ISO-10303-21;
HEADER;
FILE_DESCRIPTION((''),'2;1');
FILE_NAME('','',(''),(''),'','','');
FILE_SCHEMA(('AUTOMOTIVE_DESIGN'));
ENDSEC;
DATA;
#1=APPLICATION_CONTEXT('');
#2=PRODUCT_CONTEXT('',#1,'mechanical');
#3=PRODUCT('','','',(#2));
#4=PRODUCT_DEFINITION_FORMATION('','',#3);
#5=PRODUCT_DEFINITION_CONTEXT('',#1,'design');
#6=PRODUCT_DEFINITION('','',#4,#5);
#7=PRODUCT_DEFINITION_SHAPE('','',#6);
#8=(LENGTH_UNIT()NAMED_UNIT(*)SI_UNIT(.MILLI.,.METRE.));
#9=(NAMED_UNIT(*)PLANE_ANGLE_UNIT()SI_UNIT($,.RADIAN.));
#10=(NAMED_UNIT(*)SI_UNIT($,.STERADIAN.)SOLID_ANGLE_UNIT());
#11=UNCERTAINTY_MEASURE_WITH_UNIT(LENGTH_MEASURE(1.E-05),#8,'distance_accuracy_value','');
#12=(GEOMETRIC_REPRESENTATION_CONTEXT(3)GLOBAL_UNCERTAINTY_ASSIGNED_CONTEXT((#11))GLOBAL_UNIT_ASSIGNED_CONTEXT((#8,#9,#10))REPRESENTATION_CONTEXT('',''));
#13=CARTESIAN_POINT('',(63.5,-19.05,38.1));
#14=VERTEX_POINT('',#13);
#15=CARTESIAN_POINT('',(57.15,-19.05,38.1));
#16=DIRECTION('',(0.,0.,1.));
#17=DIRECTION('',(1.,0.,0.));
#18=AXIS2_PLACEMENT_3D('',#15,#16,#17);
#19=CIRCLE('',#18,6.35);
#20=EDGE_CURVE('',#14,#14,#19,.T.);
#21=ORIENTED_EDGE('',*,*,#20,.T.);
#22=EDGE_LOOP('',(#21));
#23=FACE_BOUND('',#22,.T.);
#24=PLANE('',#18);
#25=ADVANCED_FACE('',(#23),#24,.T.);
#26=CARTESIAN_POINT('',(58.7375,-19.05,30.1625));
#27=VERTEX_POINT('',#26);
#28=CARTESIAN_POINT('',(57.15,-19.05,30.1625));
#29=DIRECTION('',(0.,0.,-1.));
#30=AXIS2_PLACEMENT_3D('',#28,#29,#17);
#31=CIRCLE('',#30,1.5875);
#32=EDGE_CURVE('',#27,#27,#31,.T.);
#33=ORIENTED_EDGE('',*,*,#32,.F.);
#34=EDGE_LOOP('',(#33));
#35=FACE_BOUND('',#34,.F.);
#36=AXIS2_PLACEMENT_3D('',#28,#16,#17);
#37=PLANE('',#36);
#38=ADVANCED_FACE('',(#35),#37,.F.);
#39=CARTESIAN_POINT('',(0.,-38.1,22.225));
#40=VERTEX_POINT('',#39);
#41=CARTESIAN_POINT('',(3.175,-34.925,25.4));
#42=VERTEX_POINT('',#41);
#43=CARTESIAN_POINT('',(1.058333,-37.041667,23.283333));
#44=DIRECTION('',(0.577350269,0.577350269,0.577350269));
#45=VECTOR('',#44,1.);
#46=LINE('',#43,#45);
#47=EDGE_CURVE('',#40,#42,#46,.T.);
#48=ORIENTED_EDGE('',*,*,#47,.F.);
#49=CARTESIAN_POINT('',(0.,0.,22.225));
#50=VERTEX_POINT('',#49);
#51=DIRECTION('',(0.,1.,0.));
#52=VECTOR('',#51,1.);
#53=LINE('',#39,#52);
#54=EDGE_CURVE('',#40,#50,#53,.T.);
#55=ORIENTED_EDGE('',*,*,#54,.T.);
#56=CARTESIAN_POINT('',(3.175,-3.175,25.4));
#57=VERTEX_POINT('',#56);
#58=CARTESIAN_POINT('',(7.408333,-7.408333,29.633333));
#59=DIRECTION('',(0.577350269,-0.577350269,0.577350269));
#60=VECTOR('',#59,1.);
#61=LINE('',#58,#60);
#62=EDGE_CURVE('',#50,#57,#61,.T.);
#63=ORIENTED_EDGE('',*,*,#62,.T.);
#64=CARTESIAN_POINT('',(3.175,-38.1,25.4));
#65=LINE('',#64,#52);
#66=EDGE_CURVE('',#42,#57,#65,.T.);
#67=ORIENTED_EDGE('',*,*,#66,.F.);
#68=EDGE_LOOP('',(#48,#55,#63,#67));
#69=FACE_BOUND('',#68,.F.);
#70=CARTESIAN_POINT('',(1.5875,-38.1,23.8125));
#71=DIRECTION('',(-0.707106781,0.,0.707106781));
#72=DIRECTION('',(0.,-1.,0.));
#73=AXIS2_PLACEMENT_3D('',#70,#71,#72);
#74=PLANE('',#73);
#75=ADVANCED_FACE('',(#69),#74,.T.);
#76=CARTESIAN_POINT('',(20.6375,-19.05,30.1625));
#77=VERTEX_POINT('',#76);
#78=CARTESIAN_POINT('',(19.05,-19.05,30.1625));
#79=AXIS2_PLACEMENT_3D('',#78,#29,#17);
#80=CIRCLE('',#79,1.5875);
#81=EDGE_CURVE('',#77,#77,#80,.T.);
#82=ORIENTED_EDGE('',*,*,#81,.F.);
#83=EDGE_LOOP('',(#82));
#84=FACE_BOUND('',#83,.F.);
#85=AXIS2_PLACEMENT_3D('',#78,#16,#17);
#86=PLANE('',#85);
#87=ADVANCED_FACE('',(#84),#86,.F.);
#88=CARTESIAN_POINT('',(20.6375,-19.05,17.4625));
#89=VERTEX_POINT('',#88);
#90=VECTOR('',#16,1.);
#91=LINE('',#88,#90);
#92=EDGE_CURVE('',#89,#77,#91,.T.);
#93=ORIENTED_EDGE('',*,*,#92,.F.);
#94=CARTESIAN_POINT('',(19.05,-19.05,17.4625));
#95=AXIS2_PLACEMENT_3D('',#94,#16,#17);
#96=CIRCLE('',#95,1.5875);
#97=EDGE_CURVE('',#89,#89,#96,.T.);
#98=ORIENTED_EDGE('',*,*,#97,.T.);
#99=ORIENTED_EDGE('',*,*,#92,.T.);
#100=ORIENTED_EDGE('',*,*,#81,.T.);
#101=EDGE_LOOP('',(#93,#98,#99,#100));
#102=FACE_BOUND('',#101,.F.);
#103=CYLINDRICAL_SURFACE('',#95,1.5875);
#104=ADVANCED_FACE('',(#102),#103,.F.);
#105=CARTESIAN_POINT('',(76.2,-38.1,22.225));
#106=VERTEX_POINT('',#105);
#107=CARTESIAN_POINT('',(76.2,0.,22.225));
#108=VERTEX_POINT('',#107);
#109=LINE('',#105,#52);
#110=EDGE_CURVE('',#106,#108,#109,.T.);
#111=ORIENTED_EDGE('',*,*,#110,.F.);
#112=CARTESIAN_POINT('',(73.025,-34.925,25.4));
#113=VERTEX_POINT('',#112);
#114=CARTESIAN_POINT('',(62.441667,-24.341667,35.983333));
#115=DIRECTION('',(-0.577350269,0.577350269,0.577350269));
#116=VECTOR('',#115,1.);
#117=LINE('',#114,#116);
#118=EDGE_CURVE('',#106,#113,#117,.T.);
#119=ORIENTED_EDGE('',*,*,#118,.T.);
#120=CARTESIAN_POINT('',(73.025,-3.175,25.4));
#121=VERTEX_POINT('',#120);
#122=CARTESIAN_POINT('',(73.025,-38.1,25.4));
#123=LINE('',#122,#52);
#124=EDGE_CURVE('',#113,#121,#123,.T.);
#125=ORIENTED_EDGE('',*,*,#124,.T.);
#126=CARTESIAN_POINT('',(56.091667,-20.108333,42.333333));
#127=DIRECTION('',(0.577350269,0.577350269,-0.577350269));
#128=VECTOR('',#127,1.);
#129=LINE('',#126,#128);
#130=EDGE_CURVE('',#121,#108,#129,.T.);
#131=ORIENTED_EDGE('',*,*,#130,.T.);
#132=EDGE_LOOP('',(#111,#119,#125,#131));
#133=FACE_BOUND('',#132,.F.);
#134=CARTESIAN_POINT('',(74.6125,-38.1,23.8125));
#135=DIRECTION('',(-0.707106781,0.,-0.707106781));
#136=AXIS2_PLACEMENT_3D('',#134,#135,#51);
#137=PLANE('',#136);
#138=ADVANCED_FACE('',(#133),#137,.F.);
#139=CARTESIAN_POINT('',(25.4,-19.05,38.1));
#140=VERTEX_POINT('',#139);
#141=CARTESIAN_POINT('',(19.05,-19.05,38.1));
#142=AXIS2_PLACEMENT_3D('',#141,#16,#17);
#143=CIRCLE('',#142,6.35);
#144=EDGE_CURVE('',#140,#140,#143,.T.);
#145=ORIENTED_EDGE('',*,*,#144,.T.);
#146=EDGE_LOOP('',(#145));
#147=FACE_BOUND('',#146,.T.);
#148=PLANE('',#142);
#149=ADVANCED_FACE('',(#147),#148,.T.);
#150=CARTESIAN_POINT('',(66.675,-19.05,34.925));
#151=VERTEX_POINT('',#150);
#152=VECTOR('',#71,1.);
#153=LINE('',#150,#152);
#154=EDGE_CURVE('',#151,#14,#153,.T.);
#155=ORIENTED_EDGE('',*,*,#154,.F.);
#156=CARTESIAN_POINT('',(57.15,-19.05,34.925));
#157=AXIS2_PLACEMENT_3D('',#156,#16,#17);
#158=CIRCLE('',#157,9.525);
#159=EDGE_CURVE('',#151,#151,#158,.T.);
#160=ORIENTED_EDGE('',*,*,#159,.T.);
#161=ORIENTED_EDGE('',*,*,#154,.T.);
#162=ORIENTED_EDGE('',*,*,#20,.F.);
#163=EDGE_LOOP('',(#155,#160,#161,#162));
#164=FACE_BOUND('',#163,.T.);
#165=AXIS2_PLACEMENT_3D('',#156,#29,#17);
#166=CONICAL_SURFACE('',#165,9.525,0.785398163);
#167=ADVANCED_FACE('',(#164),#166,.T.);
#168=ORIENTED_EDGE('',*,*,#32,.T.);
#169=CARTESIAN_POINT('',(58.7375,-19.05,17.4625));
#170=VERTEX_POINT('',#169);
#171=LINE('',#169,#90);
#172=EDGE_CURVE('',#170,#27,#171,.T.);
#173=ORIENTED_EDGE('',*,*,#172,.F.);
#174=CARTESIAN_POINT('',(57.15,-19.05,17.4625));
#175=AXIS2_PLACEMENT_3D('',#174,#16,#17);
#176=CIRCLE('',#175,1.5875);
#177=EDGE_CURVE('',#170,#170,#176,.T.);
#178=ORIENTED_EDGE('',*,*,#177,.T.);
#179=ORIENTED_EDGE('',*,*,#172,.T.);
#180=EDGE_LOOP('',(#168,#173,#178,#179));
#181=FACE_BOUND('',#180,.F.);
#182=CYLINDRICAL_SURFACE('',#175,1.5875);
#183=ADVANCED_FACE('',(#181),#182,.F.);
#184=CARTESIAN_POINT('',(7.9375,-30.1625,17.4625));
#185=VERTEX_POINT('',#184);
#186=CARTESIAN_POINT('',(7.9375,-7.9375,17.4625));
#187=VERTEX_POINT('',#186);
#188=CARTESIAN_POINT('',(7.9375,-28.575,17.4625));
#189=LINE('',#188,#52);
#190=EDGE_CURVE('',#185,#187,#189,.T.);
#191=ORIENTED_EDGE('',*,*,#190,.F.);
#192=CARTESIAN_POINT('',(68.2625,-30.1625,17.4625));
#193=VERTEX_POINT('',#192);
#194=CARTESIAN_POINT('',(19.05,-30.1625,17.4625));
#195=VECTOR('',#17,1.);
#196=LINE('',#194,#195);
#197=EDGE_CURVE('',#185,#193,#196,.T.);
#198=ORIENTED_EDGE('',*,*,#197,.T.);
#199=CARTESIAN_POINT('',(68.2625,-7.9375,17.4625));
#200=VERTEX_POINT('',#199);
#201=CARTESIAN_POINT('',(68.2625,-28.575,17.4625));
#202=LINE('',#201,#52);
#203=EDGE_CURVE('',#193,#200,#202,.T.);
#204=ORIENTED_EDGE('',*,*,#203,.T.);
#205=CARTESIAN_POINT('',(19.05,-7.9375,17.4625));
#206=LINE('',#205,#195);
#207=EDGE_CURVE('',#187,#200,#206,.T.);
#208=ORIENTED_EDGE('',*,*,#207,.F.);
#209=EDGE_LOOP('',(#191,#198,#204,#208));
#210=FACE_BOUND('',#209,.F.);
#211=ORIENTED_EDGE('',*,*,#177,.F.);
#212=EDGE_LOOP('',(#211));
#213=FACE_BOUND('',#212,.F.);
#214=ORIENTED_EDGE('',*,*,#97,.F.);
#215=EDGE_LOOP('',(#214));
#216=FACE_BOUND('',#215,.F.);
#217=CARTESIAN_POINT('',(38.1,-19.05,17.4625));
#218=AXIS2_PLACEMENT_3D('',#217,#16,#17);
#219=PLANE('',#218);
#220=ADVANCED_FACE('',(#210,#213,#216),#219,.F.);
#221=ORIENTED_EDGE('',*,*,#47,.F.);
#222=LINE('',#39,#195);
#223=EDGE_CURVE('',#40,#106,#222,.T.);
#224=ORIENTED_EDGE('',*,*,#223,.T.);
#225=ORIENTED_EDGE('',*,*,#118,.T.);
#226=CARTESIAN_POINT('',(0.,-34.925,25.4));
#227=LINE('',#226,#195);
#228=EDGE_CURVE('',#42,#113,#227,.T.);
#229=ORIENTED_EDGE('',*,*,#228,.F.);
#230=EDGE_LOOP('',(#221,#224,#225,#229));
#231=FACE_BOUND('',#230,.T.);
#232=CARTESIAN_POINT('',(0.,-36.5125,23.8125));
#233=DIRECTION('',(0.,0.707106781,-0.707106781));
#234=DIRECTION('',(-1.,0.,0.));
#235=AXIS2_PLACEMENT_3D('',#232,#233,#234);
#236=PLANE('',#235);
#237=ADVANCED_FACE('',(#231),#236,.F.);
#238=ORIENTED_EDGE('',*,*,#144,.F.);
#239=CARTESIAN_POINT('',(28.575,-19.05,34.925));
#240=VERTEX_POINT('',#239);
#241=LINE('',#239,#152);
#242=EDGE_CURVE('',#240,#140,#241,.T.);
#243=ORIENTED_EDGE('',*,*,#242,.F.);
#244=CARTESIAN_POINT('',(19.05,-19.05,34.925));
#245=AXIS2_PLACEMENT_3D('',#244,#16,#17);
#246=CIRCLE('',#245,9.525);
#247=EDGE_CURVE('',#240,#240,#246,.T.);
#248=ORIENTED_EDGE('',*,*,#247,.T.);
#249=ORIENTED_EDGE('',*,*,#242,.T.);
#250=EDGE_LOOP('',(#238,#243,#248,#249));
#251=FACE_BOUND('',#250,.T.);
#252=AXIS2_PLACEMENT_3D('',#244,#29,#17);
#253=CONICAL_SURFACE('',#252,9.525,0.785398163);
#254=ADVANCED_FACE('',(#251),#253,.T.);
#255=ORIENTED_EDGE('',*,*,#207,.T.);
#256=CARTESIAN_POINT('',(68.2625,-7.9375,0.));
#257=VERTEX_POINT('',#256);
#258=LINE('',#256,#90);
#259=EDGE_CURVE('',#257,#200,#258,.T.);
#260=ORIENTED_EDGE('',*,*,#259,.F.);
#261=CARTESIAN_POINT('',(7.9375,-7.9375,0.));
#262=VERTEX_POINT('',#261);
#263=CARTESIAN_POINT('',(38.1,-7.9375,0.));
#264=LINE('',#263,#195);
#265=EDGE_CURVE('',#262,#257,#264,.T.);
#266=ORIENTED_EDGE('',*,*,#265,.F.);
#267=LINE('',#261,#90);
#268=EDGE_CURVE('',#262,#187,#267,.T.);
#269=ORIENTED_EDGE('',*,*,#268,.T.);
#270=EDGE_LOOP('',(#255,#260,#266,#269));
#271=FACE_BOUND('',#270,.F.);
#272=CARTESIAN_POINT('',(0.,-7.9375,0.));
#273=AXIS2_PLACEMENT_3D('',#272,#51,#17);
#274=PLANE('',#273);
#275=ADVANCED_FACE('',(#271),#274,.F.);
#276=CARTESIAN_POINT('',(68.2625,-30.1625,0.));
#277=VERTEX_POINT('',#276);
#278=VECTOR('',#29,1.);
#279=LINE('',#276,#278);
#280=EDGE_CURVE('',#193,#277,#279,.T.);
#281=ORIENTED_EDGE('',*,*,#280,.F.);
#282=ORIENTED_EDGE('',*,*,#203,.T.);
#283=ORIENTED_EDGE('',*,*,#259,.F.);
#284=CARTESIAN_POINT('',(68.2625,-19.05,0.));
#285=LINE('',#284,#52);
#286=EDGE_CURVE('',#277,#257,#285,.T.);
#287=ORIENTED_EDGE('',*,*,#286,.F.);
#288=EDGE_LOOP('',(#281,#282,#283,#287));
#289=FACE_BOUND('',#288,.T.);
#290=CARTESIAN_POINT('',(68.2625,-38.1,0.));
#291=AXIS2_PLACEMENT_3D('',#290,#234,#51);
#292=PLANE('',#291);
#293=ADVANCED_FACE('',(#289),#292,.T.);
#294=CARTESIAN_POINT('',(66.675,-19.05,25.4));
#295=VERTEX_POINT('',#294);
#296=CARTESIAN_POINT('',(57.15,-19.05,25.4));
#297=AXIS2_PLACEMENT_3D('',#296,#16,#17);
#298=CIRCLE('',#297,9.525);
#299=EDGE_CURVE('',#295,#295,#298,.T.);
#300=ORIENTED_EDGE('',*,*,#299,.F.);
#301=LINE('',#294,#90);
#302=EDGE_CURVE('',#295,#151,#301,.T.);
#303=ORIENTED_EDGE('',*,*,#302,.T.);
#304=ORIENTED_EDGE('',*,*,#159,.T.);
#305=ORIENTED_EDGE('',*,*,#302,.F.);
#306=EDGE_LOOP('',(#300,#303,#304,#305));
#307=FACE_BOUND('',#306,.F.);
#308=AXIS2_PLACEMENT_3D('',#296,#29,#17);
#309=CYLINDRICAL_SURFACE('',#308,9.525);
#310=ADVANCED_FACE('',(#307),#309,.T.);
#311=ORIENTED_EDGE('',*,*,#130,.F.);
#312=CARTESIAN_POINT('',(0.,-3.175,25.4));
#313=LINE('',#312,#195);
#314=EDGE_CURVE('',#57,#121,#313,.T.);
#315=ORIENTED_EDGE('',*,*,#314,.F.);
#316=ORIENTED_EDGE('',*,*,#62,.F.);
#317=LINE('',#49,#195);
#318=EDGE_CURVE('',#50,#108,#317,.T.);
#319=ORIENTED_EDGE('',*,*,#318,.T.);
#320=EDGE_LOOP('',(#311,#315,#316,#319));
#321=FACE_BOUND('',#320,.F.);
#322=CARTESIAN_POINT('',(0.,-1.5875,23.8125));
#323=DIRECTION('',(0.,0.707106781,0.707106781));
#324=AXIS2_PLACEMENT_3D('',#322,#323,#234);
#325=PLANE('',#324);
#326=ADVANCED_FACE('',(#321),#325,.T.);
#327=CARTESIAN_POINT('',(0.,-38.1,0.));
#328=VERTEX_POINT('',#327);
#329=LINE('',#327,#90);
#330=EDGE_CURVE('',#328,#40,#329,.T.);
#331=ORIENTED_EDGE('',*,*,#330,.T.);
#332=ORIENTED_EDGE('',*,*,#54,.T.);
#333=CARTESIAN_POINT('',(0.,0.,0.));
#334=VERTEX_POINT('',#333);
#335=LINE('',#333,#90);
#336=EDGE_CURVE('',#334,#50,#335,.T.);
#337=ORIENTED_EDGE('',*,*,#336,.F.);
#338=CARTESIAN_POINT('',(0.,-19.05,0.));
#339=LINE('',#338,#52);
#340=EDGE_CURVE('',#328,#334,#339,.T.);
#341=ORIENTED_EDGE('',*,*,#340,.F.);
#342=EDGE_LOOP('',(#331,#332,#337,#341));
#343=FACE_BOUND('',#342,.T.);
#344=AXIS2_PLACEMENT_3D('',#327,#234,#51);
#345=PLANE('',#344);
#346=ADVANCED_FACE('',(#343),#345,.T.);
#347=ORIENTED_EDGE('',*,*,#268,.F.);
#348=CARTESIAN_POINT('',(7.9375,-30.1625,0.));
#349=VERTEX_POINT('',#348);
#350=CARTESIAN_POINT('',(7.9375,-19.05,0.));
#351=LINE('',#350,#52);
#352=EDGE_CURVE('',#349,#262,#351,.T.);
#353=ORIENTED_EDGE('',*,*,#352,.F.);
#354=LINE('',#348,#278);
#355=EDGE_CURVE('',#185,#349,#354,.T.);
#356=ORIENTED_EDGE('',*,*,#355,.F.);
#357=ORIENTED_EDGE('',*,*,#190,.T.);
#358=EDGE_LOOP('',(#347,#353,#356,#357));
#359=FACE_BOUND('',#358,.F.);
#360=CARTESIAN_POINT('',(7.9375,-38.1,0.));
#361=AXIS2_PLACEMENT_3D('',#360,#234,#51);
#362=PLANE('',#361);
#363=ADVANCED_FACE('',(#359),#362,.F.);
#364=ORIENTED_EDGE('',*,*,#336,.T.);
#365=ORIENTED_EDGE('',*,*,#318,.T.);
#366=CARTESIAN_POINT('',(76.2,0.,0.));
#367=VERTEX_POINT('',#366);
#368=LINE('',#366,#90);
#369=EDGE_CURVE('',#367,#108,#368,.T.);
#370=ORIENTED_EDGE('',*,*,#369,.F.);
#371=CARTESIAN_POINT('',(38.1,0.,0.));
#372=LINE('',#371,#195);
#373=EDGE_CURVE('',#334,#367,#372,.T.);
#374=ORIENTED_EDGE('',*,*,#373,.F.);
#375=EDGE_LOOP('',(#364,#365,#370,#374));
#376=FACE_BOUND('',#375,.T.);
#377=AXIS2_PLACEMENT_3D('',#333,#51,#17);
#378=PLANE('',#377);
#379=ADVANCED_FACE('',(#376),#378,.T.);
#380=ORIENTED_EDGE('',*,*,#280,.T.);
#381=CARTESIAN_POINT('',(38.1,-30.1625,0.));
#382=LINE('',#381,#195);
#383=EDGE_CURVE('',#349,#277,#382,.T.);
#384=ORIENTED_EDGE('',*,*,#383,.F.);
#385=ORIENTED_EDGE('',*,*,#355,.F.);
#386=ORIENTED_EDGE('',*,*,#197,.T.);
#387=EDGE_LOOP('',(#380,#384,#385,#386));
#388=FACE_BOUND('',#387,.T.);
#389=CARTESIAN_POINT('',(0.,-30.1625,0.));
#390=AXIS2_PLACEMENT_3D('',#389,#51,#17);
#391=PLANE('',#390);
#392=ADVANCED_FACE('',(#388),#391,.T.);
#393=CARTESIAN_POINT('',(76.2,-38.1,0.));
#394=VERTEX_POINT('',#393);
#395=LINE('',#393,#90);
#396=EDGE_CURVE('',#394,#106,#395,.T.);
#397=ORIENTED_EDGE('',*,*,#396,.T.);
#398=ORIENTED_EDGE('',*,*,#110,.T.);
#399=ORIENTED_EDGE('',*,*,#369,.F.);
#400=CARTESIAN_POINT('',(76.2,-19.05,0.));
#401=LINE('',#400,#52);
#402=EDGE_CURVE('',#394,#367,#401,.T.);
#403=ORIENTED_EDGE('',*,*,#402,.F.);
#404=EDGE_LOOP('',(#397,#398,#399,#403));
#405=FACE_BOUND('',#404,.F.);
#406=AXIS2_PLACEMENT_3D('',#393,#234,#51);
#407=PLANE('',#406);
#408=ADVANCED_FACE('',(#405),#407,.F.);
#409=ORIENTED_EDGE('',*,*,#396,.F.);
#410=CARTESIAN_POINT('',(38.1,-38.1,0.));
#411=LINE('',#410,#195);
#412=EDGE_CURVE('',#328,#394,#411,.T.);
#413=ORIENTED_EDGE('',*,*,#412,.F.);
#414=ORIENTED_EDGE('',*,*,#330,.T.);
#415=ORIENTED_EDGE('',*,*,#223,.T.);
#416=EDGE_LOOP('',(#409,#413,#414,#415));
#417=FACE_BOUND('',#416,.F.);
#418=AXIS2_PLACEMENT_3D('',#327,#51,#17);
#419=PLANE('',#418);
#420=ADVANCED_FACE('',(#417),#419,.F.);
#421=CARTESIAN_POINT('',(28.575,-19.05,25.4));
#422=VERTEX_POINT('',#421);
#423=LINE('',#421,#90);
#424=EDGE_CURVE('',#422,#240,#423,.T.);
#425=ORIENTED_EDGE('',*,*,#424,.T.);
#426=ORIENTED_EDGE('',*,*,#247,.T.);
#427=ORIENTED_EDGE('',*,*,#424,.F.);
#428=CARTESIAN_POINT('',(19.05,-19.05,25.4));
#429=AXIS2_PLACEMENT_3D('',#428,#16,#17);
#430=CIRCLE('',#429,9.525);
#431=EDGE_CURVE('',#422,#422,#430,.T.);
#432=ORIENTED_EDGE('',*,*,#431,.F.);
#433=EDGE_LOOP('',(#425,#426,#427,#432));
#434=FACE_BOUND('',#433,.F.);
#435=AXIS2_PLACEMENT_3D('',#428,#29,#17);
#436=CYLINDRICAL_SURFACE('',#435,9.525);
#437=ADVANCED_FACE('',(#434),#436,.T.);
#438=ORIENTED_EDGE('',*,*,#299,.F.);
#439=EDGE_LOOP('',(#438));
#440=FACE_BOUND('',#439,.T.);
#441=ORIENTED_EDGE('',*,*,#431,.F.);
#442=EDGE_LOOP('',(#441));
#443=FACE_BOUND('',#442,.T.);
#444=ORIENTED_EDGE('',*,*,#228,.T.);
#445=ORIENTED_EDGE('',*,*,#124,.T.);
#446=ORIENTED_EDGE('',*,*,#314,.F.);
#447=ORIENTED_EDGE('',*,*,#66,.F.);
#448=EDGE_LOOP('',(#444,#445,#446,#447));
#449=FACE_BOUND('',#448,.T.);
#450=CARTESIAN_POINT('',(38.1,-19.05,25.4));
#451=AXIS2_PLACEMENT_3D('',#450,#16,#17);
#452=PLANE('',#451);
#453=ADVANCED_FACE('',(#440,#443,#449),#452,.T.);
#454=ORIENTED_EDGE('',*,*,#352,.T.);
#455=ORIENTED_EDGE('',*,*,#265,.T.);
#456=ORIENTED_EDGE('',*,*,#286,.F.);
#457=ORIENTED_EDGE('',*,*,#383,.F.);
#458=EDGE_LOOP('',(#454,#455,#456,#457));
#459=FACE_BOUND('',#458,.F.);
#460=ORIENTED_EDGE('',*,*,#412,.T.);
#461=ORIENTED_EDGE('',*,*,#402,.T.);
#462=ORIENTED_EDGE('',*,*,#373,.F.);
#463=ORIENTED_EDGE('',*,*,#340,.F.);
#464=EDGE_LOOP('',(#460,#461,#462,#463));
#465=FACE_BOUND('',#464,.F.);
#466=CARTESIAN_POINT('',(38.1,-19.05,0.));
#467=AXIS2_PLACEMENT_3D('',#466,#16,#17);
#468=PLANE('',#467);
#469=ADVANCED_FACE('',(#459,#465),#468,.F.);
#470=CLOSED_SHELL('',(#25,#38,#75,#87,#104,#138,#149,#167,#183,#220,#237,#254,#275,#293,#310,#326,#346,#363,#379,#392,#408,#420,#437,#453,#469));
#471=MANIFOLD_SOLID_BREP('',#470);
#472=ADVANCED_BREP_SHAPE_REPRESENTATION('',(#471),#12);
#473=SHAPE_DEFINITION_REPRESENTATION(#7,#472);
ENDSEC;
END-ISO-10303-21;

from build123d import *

# Parameters (mm, degrees)
F0_W     = 76.2
F0_H     = 38.1
F1_DEPTH = 25.4
F2_R     = 9.525
F3_DEPTH = 12.7
F4_SIZE2 = 3.175
F4_SIZE  = 3.175
F5_T     = 7.9375


# Not quite as in the source:
# - a shell that OpenCascade refuses in one call is made with other operations: the cavity is built on its own and cut out


with BuildPart() as f1:
    # F0 (on Top) → F1 (new body)
    with BuildSketch(Plane.XY):
        with Locations((38.1, -19.05)):
            Rectangle(F0_W, F0_H)
    extrude(amount=F1_DEPTH)

    # F2 (on face) → F3 (join)
    with BuildSketch(Plane.XY.offset(25.4)):
        with Locations((19.05, -19.05)):
            Circle(F2_R)
        with Locations((57.15, -19.05)):
            Circle(F2_R)
    extrude(amount=F3_DEPTH)

    # F4
    f4_edges = [f1.edges().sort_by_distance(p)[0] for p in [
        (9.525, -19.05, 38.1),
        (47.625, -19.05, 38.1),
        (38.1, -38.1, 25.4),
        (76.2, -19.05, 25.4),
        (0, -19.05, 25.4),
        (38.1, 0, 25.4),
    ]]
    chamfer(f4_edges, length=F4_SIZE, length2=F4_SIZE2)

    # F5: shell of thickness 7.9375, made by hand


with BuildPart() as f5_core1:
    # F5_t2: copy of F1
    add(f1.part)

    # the walls: a layer under each face that stays
    f5_faces = [f5_core1.faces().sort_by_distance(p)[0] for p in [
        (38.1, 0, 11.1125),
        (76.2, -19.05, 11.1125),
        (38.1, -1.5875, 23.8125),
        (0, -19.05, 11.1125),
        (38.1, -38.1, 11.1125),
        (74.6125, -19.05, 23.8125),
        (38.1, -19.05, 25.4),
        (1.5875, -19.05, 23.8125),
        (38.1, -36.5125, 23.8125),
        (9.525, -19.05, 30.1625),
        (47.625, -19.05, 30.1625),
        (11.1125, -19.05, 36.5125),
        (49.2125, -19.05, 36.5125),
        (19.05, -19.05, 38.1),
        (57.15, -19.05, 38.1),
    ]]
    thicken(f5_faces, amount=-F5_T, mode=Mode.SUBTRACT)

    # F5_s3 → F5_t4 (revolve, cut)
    with BuildSketch(Plane.XZ.offset(19.05)):
        Polygon((28.654375, 25.479375), (28.575, 17.4625), (20.6375, 17.4625), (20.6375, 25.4), align=None)
    revolve(axis=Axis((19.05, -19.05, 25.4), (0, 0, 1)), mode=Mode.SUBTRACT)

    # F5_s5 → F5_t6 (revolve, cut)
    with BuildSketch(Plane.XZ.offset(19.05)):
        Polygon((66.754375, 25.479375), (66.675, 17.4625), (58.7375, 17.4625), (58.7375, 25.4), align=None)
    revolve(axis=Axis((57.15, -19.05, 25.4), (0, 0, 1)), mode=Mode.SUBTRACT)


with BuildPart() as f1_1:
    add(f1.part)

    # what is left inside the walls is the cavity
    f5_cavity = [f5_core1.part.solids().sort_by_distance(p)[0] for p in [
        (38.1, -22.754167, 0.079375),
    ]]
    add(f5_cavity, mode=Mode.SUBTRACT)


solid = f1_1.part
